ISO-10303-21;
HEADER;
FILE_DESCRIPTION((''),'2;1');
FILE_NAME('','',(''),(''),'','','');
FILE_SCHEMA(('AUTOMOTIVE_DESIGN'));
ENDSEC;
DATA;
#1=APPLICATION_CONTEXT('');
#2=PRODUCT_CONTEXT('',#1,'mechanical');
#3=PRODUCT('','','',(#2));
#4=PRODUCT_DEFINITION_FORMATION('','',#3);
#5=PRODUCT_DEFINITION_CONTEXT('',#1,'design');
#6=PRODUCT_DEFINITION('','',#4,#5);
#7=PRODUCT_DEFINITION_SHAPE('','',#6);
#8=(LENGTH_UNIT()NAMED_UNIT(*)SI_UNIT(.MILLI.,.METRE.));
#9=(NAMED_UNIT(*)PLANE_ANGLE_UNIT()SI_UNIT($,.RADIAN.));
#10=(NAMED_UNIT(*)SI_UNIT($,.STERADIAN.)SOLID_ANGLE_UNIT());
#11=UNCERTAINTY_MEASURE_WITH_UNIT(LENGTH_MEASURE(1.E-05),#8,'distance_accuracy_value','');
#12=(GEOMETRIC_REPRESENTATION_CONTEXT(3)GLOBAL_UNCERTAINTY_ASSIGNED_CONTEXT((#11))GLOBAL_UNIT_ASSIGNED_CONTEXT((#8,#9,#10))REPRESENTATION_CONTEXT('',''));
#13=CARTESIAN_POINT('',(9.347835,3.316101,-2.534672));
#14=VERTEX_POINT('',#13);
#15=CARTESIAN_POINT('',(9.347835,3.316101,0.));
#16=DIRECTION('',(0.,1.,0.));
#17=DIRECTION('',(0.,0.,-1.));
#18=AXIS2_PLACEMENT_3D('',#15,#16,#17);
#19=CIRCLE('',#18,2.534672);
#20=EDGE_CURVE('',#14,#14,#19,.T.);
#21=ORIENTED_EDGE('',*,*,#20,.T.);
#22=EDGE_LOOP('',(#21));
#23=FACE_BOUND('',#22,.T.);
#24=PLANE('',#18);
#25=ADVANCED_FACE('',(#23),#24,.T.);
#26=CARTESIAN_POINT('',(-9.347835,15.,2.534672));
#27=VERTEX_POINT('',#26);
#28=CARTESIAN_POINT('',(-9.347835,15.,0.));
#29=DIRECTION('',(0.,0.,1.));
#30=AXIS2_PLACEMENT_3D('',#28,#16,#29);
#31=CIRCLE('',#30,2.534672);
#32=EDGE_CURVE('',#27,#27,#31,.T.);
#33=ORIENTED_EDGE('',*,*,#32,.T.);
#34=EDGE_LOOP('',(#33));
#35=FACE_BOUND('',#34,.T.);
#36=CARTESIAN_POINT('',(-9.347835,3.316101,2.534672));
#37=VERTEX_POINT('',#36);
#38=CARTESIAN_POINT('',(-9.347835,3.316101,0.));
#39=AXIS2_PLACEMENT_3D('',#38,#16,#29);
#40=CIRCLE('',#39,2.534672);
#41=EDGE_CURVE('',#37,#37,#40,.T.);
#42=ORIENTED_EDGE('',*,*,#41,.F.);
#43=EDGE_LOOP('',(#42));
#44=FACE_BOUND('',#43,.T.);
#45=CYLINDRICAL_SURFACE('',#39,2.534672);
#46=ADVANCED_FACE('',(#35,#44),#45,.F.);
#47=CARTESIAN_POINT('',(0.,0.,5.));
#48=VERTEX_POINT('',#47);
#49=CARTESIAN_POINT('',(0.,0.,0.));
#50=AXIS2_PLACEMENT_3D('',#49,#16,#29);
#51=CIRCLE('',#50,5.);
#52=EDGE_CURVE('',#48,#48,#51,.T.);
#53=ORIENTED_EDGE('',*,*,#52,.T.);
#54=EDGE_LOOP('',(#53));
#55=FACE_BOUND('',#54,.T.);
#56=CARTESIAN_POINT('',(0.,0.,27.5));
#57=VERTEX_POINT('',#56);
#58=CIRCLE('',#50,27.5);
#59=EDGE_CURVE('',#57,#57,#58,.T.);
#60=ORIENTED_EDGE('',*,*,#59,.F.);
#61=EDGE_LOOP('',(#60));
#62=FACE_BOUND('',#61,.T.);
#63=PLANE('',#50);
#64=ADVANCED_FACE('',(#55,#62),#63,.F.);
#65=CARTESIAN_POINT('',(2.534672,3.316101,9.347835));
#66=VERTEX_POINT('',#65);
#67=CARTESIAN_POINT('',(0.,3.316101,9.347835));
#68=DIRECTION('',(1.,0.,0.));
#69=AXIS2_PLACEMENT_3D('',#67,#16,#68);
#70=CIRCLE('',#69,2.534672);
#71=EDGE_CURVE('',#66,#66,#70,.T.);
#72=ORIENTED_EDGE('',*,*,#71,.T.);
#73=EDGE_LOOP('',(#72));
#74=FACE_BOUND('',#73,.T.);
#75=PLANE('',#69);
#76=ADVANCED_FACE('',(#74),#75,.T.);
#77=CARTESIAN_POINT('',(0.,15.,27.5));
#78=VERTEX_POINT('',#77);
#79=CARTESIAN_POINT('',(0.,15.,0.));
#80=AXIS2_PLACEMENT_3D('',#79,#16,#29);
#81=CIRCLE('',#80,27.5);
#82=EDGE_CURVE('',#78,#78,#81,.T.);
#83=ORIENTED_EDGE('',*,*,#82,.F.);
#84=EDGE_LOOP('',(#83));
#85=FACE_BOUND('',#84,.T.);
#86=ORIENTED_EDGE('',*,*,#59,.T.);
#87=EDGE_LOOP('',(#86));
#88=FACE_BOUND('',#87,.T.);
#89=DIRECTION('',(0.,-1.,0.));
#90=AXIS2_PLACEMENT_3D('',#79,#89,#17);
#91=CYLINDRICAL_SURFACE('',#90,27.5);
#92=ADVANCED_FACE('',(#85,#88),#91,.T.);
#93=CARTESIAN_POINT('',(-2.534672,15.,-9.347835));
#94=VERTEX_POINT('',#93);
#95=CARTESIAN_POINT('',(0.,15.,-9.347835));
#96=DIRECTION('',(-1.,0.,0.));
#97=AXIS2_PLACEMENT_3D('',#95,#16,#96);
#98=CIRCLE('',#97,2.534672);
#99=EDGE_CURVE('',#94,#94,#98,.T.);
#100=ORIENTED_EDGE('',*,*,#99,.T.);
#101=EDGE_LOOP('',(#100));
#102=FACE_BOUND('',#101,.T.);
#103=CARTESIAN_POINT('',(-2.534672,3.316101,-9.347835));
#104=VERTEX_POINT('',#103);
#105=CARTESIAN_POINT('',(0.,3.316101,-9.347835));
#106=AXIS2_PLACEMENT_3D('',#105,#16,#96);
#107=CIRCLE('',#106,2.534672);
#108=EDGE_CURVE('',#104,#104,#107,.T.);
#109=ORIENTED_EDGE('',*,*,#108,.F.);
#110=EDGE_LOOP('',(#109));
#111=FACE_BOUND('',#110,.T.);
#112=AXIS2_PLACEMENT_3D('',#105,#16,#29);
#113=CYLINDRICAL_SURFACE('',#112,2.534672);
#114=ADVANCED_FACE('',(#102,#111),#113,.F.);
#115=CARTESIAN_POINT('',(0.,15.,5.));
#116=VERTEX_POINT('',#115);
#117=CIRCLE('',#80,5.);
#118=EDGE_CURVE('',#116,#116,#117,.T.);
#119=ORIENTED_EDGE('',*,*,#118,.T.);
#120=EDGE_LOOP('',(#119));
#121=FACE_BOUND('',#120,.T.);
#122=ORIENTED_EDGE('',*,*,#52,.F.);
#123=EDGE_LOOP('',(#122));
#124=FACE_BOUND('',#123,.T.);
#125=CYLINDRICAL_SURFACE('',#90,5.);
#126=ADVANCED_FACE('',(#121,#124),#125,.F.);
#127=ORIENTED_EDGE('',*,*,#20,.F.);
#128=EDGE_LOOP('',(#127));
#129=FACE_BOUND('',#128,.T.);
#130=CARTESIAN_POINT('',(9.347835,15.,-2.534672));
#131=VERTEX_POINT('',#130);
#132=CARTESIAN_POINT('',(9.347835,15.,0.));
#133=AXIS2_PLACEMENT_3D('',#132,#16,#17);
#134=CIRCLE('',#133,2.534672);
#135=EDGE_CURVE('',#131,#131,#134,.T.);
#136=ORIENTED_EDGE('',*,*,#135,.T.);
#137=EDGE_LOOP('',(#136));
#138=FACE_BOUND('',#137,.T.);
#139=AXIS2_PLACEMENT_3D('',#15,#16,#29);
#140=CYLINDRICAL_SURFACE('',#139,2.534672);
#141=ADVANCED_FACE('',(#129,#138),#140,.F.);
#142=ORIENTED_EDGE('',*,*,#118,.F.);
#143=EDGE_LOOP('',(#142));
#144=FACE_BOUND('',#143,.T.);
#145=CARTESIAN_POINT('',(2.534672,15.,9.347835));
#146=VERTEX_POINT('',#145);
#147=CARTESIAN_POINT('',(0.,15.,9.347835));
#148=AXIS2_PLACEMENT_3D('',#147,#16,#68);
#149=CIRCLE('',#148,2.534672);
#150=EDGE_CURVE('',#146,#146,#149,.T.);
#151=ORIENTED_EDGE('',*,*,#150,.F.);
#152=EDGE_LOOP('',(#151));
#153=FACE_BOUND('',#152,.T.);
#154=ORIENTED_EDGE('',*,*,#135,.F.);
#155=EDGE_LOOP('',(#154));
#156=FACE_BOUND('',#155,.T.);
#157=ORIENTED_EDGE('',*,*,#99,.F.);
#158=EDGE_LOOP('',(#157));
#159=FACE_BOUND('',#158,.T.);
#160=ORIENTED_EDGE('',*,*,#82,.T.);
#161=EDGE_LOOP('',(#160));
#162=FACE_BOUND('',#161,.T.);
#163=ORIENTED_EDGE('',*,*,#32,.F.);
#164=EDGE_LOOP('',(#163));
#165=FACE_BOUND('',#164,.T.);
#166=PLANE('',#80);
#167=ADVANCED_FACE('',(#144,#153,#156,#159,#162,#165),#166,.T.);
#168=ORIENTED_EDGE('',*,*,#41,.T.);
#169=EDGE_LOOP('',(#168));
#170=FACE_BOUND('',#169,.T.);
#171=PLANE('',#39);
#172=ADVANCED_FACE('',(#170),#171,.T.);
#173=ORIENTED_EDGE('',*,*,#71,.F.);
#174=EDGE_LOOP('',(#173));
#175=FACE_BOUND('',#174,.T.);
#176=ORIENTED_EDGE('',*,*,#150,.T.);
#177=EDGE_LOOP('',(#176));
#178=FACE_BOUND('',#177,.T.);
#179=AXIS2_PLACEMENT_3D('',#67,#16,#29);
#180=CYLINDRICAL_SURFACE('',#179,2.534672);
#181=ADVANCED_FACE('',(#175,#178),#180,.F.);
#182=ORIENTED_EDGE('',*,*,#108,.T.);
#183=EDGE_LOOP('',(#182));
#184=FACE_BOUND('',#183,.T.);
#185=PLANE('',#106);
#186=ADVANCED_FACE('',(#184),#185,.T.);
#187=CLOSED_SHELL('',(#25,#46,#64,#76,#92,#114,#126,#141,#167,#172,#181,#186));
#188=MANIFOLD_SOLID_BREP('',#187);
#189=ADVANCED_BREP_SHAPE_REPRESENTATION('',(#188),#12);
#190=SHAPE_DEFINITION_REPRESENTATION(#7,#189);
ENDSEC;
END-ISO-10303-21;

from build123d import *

# Parameters (mm, degrees)
SKETCH1_R           = 27.5
BOSS_EXTRUDE1_DEPTH = 15
SKETCH2_R           = 5
CUT_EXTRUDE1_DEPTH  = 42.683330001
SKETCH3_R           = 2.534672143
CUT_EXTRUDE2_DEPTH  = 11.683898907
CIRPATTERN1_COUNT   = 4


with BuildPart() as part:
    # Sketch1 → Boss-Extrude1 (new body)
    with BuildSketch(Plane(origin=(0, 0, 0), x_dir=(1, 0, 0), z_dir=(0, 1, 0))):
        Circle(SKETCH1_R)
    extrude(amount=BOSS_EXTRUDE1_DEPTH)

    # Sketch2 → Cut-Extrude1 (cut, through all)
    with BuildSketch(Plane(origin=(0, 0, 0), x_dir=(1, 0, 0), z_dir=(0, 1, 0))):
        Circle(SKETCH2_R)
    extrude(amount=CUT_EXTRUDE1_DEPTH, mode=Mode.SUBTRACT)

    # Sketch3 → Cut-Extrude2 (cut)
    with BuildSketch(Plane(origin=(0, 15, 0), x_dir=(1, 0, 0), z_dir=(0, 1, 0))):
        with Locations((-9.347834619, 0)):
            Circle(SKETCH3_R)
    cut_extrude2 = extrude(amount=-CUT_EXTRUDE2_DEPTH, mode=Mode.SUBTRACT)

    # CirPattern1: Cut-Extrude2 ×4 about axis
    cirpattern1_axis = Axis((0, 0, 0), (0, 1, 0))
    for i in range(1, CIRPATTERN1_COUNT):
        add(cut_extrude2.rotate(cirpattern1_axis, i * 360 / CIRPATTERN1_COUNT), mode=Mode.SUBTRACT)


solid = part.part
